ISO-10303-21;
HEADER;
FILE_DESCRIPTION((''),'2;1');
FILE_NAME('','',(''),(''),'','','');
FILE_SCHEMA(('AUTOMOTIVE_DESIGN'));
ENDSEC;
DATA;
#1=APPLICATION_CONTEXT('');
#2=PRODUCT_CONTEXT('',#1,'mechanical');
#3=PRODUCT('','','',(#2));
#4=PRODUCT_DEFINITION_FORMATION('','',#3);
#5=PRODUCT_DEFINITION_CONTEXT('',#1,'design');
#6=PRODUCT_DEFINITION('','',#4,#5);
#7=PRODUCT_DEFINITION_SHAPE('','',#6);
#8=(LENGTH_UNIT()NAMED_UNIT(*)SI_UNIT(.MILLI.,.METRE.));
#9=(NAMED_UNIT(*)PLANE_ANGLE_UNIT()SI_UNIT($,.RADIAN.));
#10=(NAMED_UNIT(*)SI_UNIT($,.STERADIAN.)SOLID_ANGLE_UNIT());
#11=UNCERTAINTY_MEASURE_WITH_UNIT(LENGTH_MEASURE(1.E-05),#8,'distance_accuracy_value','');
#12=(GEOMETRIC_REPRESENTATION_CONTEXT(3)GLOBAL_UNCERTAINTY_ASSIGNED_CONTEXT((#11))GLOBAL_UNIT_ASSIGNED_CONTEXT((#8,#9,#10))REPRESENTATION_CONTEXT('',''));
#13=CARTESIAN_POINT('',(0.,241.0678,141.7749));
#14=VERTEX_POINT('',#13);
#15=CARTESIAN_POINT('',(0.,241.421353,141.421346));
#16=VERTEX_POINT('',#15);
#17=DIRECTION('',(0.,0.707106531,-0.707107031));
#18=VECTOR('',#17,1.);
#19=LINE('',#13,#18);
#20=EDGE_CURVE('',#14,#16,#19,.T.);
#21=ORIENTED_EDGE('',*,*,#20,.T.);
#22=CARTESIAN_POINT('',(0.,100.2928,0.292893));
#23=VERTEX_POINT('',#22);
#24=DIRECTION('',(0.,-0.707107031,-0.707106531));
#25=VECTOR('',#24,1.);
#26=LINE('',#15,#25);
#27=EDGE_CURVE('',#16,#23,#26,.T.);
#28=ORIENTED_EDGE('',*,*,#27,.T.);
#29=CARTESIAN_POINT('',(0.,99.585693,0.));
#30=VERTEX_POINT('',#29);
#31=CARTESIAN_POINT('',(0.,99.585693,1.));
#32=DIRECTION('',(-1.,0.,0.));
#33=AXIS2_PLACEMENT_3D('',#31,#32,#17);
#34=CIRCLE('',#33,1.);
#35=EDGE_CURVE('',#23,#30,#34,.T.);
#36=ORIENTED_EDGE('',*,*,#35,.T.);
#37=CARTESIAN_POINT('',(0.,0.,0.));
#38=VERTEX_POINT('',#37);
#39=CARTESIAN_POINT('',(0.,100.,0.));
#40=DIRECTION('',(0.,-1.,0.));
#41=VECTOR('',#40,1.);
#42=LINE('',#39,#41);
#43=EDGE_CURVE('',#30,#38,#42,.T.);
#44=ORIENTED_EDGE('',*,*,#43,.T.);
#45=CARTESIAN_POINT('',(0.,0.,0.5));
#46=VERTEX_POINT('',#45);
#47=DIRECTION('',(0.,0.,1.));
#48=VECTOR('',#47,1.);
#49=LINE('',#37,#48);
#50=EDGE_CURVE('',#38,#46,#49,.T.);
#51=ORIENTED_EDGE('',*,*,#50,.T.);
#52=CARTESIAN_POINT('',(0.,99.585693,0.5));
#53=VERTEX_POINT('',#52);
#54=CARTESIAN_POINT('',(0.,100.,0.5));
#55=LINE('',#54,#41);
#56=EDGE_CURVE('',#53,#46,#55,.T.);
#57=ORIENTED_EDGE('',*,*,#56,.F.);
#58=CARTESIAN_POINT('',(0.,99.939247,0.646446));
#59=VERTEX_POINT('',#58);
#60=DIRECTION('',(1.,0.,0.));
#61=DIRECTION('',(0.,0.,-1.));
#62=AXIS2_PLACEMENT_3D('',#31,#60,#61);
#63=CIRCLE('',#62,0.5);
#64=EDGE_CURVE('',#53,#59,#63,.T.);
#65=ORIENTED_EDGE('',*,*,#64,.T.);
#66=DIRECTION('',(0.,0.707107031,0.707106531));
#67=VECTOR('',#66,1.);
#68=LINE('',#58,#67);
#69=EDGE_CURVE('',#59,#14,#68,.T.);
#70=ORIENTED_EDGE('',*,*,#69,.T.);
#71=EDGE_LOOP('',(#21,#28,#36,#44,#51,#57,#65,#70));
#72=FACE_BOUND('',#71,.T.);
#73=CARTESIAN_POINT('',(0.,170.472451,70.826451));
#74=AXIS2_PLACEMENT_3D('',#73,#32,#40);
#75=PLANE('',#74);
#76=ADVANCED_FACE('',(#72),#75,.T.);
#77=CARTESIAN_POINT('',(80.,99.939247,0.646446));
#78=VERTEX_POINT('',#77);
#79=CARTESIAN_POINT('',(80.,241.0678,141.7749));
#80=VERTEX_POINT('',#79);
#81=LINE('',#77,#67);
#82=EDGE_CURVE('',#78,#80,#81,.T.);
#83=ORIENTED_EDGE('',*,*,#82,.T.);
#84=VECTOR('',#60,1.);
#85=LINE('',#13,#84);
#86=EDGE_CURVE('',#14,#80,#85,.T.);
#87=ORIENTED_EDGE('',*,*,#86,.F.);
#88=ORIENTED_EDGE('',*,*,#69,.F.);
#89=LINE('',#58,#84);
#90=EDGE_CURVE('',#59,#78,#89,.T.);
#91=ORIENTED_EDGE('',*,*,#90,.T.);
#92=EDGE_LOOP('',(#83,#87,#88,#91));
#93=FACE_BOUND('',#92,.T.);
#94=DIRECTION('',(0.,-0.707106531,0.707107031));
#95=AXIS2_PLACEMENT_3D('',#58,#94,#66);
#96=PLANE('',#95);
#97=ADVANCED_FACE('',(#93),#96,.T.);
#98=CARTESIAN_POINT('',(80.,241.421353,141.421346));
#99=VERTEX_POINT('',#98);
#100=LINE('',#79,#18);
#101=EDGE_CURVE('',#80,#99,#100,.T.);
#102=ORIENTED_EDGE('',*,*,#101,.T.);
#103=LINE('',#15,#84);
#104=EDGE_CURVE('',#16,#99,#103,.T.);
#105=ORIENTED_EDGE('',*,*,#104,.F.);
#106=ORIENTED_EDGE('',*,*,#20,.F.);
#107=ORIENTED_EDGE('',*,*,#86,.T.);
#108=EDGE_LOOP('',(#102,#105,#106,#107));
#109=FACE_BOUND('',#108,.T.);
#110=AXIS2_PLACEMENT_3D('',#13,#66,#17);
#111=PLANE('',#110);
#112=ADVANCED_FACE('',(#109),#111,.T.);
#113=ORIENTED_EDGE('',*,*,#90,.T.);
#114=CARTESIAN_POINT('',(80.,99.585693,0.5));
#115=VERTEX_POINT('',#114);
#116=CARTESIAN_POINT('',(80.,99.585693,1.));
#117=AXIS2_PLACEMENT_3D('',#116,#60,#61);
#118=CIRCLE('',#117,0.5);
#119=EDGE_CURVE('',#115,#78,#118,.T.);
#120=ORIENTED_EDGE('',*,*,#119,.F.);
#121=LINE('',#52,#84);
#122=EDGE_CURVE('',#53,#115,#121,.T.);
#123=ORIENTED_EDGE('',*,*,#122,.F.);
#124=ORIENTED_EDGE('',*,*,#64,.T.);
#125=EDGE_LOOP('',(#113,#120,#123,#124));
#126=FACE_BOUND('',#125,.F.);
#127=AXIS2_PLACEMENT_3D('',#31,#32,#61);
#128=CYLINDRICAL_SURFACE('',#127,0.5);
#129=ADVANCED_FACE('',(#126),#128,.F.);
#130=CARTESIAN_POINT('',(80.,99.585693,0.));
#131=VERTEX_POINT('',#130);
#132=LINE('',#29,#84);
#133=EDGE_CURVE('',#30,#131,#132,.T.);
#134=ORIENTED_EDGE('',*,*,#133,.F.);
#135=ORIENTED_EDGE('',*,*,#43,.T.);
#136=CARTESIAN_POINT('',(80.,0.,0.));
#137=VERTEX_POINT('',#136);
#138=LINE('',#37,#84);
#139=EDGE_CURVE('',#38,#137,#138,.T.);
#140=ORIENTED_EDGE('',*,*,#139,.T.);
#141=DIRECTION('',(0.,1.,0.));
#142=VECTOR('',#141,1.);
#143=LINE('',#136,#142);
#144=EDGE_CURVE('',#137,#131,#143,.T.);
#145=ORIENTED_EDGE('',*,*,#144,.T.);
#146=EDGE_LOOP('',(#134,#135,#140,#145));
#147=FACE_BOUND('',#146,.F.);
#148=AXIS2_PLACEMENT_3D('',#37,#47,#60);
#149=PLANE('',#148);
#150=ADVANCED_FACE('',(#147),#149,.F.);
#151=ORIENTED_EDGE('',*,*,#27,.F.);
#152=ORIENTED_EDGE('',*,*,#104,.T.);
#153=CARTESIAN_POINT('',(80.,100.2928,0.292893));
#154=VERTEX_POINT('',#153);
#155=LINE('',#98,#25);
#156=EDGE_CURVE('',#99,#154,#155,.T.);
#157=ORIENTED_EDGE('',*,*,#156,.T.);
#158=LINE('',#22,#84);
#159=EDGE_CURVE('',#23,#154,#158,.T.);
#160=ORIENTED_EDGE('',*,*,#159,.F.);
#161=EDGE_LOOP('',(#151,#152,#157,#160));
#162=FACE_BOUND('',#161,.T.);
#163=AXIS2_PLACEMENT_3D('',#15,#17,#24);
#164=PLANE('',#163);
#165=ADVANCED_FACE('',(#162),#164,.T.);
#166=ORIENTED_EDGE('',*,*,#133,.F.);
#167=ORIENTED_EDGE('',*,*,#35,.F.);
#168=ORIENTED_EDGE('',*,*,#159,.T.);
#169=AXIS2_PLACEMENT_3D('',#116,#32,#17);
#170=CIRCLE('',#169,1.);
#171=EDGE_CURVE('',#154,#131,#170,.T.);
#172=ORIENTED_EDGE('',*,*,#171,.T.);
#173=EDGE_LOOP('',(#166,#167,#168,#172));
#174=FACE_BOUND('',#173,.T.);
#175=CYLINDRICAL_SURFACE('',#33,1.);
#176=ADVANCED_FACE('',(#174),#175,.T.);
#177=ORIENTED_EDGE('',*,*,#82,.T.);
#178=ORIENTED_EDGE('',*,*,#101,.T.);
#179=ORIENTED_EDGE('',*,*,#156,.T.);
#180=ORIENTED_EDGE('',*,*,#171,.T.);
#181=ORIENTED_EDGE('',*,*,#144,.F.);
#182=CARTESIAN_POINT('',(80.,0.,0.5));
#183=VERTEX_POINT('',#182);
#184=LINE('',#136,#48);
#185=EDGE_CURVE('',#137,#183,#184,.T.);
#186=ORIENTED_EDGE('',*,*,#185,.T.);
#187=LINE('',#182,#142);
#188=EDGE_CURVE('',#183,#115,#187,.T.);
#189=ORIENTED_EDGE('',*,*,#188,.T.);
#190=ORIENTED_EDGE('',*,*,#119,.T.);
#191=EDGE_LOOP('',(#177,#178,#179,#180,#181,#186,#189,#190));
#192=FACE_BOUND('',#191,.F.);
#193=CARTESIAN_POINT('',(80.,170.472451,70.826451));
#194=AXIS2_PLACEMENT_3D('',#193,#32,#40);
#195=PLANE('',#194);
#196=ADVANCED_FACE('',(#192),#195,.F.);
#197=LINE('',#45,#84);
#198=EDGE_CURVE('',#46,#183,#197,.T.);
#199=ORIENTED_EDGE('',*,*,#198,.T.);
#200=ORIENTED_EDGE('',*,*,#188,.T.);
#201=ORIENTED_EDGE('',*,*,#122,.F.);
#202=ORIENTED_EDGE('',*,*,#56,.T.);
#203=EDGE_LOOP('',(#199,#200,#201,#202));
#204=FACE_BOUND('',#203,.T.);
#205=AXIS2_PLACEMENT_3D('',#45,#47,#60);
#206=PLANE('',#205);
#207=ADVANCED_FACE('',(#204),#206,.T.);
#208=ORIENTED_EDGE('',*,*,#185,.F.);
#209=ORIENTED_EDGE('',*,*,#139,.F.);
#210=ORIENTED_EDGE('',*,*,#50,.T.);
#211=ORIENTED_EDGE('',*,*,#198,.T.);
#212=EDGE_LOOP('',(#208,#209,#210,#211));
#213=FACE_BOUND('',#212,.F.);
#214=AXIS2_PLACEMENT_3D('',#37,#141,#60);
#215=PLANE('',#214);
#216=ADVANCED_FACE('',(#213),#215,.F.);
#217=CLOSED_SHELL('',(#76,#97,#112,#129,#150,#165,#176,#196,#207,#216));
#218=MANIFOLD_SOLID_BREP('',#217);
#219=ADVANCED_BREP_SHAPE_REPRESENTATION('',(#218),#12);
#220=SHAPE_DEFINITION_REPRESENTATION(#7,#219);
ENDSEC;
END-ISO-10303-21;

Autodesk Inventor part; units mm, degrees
ref_plane "YZ Plane" through (0, 0, 0) normal (1, 0, 0) x (0, 1, 0)
ref_plane "XZ Plane" through (0, 0, 0) normal (0, 1, 0) x (-1, 0, 0)
ref_plane "XY Plane" through (0, 0, 0) normal (0, 0, 1) x (1, 0, 0)
sketch "Sketch1" plane through (0, 0, 0) normal (0, 0, 1) x (1, 0, 0)
  line L0 (0, 0) -> (80, 0)
  line L1 (80, 0) -> (80, 100)
  line L2 (80, 100) -> (0, 100)
  line L3 (0, 100) -> (0, 0)
  dimension "d0" = 80
  dimension "d1" = 100
extrude "Plate1" add sketch "Sketch1" along normal blind 0.5
sketch "Sketch2" plane through (0, 99.6464, 0.3536) normal (0, 0.7071068, -0.7071068) x (-1, 0, 0)
  line L0 (-80, 0) -> (0, 0)
  line L1 (0, 0) -> (0, 200)
  line L2 (0, 200) -> (-80, 200)
  line L3 (-80, 200) -> (-80, 0)
edge flange "Flange1" height 200 angle 45 thickness 0.5 bend radius 0.5 thickness toward (0, 0.7071068, -0.7071068) relief tear relief width 0.5 relief depth 0.25 edges at (40, 100, 0.5) wall of the first edge with corners at (80, 99.6464, 0.3536) (0, 99.6464, 0.3536) (0, 241.0678, 141.7749) (80, 241.0678, 141.7749)
bend "Bend1"
corner "Corner1"
equation "\"d3\" = BendReliefWidth"
equation "\"d4\" = BendReliefDepth"
equation "\"d5\" = MinimumRemnant"
equation "\"d6\" = BendRadius"
equation "\"d9\" = BendRadius"
equation "\"d10\" = CornerReliefSize"
equation "\"d11\" = GapSize"
equation "\"d12\" = JacobiRadiusSize"
equation "\"BendRadius\" = Thickness"
equation "\"BendReliefWidth\" = Thickness"
equation "\"BendReliefDepth\" = 0.5 * Thickness"
equation "\"CornerReliefSize\" = 4 * Thickness"
equation "\"MinimumRemnant\" = 2 * Thickness"
equation "\"TransitionRadius\" = BendRadius"
equation "\"JacobiRadiusSize\" = BendRadius"
equation "\"GapSize\" = Thickness"
equation "\"d2\" = BendRadius"
equation "\"Thickness\" = 0.5"
properties part number "Tunel_GridPlate" material "Stainless Steel"
